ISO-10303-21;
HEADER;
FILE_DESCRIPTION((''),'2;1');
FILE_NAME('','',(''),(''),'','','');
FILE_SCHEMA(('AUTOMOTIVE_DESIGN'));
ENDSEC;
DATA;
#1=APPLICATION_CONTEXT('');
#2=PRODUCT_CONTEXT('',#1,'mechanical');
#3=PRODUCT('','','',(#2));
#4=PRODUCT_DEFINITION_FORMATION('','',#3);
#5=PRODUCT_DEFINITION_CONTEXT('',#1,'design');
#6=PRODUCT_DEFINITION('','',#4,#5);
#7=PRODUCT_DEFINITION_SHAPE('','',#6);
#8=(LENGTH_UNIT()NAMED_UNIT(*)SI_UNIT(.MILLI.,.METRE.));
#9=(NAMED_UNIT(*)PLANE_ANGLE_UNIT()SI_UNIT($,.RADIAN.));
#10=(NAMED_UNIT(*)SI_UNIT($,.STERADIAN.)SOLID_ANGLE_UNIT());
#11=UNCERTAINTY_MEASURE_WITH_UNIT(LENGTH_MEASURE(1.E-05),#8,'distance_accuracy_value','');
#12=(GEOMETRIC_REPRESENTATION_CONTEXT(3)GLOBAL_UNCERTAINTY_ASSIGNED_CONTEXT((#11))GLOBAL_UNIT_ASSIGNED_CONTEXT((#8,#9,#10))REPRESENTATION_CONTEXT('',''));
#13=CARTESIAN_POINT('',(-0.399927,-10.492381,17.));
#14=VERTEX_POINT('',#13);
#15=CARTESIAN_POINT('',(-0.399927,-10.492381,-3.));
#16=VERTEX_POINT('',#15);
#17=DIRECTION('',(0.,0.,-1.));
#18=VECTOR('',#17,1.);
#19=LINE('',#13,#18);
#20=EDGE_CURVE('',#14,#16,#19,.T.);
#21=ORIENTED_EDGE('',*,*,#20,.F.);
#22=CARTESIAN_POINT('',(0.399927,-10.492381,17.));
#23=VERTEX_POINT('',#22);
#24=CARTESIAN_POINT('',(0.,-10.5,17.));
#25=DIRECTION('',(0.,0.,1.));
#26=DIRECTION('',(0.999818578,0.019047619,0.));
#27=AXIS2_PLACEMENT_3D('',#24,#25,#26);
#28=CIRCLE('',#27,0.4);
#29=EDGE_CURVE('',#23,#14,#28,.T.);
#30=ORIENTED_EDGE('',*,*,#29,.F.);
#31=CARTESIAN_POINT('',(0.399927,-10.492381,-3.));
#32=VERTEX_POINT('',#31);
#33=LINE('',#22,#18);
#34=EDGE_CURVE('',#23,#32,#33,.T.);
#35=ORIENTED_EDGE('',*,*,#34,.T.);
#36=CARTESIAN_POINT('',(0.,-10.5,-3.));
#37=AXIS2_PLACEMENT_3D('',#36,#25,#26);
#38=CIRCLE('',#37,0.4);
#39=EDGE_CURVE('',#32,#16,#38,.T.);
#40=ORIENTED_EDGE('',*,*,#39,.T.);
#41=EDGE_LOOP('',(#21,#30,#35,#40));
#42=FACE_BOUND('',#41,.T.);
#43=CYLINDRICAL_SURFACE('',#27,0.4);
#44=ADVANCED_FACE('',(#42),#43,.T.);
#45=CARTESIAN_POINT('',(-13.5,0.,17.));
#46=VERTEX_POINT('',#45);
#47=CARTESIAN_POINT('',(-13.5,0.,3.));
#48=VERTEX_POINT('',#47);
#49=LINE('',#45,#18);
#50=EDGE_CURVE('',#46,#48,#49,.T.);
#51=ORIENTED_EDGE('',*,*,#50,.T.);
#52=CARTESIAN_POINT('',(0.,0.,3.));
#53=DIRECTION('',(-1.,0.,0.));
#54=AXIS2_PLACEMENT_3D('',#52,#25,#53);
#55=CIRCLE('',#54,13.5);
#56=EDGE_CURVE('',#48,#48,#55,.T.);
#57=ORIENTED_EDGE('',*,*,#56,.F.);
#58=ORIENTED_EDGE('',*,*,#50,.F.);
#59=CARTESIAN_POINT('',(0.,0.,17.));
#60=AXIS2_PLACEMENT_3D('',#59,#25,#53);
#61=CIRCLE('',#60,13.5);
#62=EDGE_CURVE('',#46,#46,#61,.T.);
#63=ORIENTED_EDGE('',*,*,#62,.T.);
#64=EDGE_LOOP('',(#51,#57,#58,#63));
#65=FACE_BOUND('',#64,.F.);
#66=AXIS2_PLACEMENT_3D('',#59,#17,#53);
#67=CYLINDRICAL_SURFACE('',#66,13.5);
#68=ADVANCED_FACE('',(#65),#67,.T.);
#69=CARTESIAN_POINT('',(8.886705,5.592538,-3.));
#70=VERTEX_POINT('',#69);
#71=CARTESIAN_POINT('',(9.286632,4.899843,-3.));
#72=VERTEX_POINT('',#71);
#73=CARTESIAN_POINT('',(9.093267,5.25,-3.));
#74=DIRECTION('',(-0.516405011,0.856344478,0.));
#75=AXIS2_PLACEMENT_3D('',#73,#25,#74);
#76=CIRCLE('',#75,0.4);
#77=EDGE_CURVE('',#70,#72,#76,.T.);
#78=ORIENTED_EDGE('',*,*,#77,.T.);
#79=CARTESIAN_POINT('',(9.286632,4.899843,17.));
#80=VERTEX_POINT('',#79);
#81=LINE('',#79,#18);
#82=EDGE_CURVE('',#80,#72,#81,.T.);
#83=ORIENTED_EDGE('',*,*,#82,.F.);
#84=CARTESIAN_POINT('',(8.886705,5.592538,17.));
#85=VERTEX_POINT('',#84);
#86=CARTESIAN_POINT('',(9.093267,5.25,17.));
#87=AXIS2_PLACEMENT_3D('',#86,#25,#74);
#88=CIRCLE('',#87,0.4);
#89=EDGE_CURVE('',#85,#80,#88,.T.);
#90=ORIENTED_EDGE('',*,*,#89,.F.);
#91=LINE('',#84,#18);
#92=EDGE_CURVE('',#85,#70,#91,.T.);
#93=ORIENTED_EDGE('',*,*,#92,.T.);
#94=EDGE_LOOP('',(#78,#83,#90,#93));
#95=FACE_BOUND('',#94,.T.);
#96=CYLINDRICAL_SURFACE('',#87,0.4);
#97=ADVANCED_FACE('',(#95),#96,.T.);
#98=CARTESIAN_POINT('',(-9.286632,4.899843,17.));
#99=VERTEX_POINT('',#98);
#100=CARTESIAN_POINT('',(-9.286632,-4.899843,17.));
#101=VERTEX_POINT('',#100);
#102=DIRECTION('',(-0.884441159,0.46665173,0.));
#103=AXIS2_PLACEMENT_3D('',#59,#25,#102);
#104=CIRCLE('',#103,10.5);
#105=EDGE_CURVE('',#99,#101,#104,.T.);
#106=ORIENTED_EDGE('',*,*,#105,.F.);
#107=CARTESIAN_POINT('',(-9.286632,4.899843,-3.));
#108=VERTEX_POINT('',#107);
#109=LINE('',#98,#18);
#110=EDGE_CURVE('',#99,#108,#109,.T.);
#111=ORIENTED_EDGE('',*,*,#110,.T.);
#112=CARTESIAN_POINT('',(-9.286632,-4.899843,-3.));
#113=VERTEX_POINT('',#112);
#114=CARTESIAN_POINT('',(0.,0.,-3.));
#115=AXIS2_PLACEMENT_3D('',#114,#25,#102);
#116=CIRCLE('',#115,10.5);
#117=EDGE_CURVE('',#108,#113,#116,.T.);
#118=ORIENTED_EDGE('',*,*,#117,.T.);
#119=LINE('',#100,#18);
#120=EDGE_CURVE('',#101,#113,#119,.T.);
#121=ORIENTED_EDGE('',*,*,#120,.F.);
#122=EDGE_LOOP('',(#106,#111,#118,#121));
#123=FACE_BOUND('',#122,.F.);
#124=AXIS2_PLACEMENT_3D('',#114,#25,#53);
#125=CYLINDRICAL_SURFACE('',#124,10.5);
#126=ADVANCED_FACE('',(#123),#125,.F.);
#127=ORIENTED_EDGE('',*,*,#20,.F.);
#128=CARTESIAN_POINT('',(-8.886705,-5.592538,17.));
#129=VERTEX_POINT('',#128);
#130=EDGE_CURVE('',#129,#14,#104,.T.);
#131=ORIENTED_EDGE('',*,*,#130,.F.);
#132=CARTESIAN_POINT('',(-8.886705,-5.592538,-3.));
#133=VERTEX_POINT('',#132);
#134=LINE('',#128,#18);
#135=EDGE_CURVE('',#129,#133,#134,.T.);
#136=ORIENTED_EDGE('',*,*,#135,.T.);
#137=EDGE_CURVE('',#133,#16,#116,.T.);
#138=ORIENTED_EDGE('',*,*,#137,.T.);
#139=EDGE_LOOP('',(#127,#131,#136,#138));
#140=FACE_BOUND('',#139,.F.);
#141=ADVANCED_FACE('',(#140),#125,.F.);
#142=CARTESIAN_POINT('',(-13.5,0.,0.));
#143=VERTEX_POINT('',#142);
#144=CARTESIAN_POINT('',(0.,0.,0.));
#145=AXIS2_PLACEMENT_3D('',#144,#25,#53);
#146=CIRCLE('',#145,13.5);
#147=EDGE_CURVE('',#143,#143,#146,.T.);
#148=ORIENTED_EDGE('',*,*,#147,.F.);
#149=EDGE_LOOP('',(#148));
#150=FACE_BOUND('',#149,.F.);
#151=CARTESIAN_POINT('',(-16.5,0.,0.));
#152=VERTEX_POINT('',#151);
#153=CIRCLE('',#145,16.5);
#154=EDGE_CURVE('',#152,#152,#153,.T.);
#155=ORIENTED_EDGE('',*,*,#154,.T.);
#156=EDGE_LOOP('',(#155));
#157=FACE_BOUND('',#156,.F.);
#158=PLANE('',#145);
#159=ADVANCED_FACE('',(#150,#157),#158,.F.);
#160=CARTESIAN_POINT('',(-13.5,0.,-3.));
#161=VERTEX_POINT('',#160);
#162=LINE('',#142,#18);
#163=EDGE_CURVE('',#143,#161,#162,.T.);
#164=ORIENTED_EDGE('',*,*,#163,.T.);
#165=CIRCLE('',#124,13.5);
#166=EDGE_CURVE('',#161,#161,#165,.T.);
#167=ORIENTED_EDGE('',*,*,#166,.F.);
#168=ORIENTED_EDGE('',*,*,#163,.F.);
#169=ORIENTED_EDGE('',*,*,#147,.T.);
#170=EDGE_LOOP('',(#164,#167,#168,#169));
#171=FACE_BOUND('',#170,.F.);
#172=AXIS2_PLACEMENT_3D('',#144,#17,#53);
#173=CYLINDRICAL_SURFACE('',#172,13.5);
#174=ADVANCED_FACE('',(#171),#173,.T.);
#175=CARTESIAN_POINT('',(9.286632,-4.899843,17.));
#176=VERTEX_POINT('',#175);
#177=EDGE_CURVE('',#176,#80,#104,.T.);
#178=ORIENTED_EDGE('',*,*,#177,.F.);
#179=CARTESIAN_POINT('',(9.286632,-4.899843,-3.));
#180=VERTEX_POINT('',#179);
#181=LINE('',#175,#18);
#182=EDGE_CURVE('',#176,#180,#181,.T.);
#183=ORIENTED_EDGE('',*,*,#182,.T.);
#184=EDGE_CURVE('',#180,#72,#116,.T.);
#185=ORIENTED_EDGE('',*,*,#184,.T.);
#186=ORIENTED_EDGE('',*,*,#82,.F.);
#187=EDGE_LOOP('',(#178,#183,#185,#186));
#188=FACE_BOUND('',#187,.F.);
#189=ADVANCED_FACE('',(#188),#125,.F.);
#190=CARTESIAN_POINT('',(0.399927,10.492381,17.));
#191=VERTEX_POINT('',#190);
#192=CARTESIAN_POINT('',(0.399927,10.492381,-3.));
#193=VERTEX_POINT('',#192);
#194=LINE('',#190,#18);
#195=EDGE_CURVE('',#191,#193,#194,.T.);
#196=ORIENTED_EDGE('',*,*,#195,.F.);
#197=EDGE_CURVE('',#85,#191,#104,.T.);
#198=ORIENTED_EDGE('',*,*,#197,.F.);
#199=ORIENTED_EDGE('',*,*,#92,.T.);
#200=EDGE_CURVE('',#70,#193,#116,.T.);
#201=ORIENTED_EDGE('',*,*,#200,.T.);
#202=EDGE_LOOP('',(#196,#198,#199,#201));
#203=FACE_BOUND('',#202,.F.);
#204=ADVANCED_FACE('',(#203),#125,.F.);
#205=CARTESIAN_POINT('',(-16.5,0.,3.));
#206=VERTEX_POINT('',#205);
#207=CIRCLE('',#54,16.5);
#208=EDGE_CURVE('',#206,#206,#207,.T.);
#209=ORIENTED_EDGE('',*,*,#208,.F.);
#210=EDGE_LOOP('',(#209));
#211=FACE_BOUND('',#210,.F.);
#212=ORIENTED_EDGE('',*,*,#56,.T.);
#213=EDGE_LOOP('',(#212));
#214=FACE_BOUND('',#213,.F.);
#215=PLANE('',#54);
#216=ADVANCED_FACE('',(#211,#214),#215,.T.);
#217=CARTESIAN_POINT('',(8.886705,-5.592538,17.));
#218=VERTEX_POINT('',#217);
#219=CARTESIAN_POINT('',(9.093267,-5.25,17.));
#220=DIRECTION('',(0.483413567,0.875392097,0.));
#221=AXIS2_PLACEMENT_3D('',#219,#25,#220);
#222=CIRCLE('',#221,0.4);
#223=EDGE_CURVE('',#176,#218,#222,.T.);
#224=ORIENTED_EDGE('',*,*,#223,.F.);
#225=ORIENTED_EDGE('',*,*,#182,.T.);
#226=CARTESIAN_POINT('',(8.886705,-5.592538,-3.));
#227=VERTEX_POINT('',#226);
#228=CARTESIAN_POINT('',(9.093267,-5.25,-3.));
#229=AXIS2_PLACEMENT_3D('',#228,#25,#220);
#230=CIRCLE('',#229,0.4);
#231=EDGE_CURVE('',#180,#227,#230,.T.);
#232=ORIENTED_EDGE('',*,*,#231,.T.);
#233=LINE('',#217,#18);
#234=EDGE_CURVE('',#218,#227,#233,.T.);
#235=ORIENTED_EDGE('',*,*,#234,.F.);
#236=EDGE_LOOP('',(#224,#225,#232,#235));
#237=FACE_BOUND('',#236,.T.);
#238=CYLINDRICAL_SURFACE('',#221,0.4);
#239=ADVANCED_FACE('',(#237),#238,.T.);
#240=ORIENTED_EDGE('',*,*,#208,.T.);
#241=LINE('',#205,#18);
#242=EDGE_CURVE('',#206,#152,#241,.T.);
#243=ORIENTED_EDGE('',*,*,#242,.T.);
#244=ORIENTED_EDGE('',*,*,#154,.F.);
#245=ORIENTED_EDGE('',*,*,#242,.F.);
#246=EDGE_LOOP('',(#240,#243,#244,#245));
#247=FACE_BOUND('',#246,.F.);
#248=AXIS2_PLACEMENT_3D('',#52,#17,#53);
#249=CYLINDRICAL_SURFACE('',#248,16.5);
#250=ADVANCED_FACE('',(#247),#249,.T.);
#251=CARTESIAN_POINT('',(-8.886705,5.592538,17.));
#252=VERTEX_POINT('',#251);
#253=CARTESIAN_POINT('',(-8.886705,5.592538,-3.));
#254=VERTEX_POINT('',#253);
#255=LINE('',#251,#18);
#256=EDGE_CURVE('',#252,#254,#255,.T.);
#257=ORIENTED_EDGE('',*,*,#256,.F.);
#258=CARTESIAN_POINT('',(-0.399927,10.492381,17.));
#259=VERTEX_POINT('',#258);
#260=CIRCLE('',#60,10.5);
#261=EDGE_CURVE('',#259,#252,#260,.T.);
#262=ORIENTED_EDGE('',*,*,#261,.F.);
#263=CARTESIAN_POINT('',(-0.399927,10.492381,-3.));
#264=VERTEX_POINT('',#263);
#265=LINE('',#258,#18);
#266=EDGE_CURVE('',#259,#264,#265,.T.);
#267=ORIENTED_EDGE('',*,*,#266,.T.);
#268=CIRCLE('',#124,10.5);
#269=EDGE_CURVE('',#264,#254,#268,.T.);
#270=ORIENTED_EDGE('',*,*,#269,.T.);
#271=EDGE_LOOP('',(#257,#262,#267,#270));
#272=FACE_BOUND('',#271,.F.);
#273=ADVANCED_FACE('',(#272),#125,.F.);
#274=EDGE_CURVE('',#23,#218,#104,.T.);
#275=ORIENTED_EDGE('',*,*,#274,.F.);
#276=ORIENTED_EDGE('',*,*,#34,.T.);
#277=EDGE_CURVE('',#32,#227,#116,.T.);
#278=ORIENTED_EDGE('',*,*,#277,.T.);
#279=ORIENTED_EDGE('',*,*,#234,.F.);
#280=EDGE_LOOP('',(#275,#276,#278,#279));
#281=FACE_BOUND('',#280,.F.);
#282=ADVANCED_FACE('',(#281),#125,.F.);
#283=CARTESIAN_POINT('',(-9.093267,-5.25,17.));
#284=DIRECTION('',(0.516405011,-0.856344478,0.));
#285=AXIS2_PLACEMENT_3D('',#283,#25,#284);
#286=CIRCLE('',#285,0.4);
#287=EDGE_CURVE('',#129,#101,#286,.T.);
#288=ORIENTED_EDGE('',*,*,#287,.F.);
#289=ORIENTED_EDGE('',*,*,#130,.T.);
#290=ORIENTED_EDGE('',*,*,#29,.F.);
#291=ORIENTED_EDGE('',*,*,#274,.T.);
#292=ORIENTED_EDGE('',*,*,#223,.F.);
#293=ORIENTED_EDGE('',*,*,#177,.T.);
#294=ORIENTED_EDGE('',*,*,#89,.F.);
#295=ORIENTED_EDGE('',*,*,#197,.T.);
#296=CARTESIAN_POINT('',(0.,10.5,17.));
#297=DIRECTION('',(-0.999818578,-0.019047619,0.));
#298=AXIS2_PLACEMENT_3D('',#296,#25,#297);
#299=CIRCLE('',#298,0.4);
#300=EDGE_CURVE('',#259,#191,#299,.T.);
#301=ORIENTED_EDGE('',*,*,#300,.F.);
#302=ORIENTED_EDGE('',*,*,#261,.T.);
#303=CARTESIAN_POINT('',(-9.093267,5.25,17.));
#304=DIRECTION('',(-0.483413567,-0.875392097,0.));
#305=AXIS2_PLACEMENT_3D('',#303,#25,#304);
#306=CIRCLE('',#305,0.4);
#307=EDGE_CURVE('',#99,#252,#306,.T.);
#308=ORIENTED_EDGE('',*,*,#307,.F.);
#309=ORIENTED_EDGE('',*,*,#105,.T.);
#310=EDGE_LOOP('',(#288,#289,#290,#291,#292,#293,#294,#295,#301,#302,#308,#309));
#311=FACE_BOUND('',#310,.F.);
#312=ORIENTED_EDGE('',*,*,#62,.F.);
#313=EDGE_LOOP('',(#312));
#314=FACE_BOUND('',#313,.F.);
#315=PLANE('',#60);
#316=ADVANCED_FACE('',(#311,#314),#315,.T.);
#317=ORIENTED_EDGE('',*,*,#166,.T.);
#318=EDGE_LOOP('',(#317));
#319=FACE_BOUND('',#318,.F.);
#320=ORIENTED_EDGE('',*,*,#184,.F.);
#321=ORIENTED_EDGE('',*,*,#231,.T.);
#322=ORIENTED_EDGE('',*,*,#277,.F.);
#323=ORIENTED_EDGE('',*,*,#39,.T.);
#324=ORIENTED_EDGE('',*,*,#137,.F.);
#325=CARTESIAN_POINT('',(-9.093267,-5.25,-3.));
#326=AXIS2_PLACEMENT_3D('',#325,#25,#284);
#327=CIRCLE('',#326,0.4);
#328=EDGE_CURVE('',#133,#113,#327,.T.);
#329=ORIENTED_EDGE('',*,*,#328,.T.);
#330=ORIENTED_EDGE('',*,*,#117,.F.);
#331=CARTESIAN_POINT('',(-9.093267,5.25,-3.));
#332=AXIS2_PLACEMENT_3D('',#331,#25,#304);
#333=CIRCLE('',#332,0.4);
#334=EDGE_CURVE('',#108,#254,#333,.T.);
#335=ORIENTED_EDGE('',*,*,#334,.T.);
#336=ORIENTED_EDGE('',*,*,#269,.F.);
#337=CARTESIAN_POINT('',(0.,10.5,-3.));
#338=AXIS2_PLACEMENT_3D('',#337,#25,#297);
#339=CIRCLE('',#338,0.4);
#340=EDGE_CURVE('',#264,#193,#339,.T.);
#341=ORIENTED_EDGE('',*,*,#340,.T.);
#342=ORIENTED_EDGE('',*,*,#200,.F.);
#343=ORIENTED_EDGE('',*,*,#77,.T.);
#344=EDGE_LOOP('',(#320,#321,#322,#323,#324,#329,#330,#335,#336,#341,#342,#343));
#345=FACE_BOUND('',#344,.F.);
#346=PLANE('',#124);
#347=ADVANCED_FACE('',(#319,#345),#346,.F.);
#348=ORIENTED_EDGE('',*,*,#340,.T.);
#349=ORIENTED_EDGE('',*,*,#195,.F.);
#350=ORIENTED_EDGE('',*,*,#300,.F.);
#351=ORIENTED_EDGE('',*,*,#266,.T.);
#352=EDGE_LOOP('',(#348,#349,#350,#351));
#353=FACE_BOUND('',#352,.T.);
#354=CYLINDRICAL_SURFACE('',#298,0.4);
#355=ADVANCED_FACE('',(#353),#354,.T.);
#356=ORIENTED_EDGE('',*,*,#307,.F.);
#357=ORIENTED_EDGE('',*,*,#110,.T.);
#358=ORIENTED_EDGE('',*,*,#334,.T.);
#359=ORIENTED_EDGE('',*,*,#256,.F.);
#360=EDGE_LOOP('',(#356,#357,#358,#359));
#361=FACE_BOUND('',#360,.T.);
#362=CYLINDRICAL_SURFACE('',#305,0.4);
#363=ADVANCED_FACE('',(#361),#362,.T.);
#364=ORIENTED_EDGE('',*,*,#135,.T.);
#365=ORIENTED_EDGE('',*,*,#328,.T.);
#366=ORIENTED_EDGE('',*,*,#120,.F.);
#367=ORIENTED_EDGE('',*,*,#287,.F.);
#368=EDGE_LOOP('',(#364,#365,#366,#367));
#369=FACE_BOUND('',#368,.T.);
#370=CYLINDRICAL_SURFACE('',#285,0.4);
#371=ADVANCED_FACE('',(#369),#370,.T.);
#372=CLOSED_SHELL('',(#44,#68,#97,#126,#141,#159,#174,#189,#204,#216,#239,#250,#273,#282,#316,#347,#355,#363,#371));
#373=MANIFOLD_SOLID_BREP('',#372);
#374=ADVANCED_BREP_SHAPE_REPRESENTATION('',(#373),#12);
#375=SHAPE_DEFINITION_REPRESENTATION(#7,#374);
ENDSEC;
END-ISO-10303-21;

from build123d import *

# Parameters (mm, degrees)
F3_DEPTH        = 20
F3_COPIES_COUNT = 6


# Not quite as in the source:
# - a pattern or mirror of a feature is missing from the dataset's text; its kind, count and spacing are read off the source's solid


with BuildPart() as f1:
    # F0 (on Front) → F1 (revolve)
    with BuildSketch(Plane.XZ):
        Polygon((-13.5, -3), (-10.5, -3), (-10.5, 17), (-13.5, 17), (-13.5, 3), (-16.5, 3), (-16.5, 0), (-13.5, 0), align=None)
    revolve(axis=Axis((0, 0, 29.5368466722), (0, 0, 1)))

    # F2 (on face) → F3 (join, through all)
    with BuildSketch(Plane.XY.offset(17)):
        with BuildLine():
            ThreePointArc((0.3999274311, 10.4923809524), (0, 10.5), (-0.3999274311, 10.4923809524))
            ThreePointArc((-0.3999274311, 10.4923809524), (0, 10.1), (0.3999274311, 10.4923809524))
        make_face()
    f3 = extrude(amount=-F3_DEPTH)

    # F3_copies: F3 ×6 about axis
    f3_copies_axis = Axis((0, 0, 0), (0, 0, 1))
    for i in range(1, F3_COPIES_COUNT):
        add(f3.rotate(f3_copies_axis, i * 360 / F3_COPIES_COUNT))


solid = f1.part
